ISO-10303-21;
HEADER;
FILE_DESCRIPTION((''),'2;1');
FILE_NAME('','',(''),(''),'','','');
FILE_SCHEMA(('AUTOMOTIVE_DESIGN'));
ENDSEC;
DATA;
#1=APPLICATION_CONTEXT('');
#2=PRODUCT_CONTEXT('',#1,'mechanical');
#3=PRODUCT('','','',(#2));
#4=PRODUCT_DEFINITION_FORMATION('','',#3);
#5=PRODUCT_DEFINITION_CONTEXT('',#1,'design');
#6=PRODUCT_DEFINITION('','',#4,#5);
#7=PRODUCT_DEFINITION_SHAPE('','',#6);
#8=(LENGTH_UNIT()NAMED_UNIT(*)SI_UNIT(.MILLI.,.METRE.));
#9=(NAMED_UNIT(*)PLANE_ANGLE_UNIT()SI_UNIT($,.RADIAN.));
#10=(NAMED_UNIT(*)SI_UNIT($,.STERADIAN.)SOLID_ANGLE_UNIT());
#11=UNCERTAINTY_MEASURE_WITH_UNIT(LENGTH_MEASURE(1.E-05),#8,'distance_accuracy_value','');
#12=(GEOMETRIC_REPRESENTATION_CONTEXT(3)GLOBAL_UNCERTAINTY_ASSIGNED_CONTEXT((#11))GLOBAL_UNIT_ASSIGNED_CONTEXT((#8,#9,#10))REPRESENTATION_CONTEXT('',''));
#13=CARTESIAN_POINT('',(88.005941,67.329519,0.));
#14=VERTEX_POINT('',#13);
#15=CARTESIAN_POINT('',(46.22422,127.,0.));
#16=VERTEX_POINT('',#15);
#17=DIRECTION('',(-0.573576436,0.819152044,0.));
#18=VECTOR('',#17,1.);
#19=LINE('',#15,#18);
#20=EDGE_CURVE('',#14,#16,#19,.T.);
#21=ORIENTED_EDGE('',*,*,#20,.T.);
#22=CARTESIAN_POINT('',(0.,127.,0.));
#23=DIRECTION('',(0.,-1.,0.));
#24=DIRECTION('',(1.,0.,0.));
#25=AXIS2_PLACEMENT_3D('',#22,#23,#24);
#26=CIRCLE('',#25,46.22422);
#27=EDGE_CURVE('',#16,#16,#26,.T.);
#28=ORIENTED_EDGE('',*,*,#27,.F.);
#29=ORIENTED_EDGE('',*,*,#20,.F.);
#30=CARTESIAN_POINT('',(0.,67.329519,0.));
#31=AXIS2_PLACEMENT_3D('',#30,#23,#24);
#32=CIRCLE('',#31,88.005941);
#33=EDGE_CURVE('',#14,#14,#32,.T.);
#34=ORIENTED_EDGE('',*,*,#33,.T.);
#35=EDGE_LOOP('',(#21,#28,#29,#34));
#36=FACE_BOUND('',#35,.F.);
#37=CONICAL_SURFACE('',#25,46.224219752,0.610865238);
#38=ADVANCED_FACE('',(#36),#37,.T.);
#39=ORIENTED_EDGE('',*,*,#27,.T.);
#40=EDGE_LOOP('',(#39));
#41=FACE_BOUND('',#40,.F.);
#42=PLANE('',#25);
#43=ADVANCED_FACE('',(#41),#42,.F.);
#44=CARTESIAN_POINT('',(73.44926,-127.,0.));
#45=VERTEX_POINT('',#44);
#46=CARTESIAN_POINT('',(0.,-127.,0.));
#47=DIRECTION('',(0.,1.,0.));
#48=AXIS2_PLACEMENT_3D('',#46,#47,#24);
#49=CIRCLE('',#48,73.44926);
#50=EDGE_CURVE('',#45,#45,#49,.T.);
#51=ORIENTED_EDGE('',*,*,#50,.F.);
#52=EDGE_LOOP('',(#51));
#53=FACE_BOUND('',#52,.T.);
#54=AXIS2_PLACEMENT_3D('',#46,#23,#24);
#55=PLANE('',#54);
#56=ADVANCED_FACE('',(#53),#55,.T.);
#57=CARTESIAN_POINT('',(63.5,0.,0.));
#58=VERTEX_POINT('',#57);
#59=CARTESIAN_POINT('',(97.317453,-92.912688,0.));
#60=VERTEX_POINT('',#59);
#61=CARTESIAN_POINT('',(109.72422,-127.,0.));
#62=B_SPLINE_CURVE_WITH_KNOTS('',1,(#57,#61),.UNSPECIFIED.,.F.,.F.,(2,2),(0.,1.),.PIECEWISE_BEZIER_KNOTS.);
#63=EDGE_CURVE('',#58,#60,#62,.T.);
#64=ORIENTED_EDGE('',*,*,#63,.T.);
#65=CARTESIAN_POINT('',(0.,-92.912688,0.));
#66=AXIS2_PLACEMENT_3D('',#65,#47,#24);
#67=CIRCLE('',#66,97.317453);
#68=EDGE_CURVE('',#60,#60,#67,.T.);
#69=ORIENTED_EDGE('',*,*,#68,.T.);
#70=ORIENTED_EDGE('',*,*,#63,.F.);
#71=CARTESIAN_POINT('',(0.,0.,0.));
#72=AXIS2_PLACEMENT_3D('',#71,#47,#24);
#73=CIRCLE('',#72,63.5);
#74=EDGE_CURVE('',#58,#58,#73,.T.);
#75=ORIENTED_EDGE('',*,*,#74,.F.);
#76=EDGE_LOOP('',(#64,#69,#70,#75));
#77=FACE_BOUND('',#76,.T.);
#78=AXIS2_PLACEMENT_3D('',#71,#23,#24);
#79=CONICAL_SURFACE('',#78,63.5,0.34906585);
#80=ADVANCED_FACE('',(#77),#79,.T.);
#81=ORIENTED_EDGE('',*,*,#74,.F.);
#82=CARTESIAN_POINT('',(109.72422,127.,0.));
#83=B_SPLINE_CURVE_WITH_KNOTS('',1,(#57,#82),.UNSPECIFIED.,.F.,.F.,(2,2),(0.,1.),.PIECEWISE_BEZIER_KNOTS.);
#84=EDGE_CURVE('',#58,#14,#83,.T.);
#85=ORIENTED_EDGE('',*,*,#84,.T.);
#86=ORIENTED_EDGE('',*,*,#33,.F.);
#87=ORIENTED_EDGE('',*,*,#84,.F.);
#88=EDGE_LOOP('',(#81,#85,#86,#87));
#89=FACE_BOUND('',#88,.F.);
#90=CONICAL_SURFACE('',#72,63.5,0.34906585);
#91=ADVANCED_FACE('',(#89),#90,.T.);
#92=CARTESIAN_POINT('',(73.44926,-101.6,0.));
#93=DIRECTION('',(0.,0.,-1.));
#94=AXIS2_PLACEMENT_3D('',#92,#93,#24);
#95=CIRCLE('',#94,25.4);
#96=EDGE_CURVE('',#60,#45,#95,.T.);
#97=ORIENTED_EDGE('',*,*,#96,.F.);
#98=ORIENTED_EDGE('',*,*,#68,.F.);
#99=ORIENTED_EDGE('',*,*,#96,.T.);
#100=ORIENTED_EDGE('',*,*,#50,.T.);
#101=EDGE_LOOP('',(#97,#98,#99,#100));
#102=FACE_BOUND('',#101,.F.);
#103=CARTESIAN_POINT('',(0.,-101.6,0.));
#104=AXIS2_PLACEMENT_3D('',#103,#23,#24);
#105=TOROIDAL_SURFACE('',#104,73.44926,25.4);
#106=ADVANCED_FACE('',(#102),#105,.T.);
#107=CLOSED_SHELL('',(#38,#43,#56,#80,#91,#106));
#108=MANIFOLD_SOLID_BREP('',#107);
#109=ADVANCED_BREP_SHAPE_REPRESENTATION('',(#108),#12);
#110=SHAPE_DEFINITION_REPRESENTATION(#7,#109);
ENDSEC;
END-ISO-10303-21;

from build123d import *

# Parameters (mm, degrees)
F0_R     = 63.5
F1_DEPTH = 127
F1_TAPER = -20
F2_R     = 25.4
F3_SIZE  = 63.5


with BuildPart() as f1:
    # F0 (on Front) → F1 (new body, symmetric)
    with BuildSketch(Plane.XZ):
        Circle(F0_R)
    extrude(amount=F1_DEPTH, both=True, taper=F1_TAPER)

    # F2
    f2_edges = [f1.edges().sort_by_distance(p)[0] for p in [
        (-109.72422, -127, 0),
    ]]
    fillet(f2_edges, radius=F2_R)

    # F3
    f3_edges = [f1.edges().sort_by_distance(p)[0] for p in [
        (-109.72422, 127, 0),
    ]]
    chamfer(f3_edges, length=F3_SIZE)


solid = f1.part
